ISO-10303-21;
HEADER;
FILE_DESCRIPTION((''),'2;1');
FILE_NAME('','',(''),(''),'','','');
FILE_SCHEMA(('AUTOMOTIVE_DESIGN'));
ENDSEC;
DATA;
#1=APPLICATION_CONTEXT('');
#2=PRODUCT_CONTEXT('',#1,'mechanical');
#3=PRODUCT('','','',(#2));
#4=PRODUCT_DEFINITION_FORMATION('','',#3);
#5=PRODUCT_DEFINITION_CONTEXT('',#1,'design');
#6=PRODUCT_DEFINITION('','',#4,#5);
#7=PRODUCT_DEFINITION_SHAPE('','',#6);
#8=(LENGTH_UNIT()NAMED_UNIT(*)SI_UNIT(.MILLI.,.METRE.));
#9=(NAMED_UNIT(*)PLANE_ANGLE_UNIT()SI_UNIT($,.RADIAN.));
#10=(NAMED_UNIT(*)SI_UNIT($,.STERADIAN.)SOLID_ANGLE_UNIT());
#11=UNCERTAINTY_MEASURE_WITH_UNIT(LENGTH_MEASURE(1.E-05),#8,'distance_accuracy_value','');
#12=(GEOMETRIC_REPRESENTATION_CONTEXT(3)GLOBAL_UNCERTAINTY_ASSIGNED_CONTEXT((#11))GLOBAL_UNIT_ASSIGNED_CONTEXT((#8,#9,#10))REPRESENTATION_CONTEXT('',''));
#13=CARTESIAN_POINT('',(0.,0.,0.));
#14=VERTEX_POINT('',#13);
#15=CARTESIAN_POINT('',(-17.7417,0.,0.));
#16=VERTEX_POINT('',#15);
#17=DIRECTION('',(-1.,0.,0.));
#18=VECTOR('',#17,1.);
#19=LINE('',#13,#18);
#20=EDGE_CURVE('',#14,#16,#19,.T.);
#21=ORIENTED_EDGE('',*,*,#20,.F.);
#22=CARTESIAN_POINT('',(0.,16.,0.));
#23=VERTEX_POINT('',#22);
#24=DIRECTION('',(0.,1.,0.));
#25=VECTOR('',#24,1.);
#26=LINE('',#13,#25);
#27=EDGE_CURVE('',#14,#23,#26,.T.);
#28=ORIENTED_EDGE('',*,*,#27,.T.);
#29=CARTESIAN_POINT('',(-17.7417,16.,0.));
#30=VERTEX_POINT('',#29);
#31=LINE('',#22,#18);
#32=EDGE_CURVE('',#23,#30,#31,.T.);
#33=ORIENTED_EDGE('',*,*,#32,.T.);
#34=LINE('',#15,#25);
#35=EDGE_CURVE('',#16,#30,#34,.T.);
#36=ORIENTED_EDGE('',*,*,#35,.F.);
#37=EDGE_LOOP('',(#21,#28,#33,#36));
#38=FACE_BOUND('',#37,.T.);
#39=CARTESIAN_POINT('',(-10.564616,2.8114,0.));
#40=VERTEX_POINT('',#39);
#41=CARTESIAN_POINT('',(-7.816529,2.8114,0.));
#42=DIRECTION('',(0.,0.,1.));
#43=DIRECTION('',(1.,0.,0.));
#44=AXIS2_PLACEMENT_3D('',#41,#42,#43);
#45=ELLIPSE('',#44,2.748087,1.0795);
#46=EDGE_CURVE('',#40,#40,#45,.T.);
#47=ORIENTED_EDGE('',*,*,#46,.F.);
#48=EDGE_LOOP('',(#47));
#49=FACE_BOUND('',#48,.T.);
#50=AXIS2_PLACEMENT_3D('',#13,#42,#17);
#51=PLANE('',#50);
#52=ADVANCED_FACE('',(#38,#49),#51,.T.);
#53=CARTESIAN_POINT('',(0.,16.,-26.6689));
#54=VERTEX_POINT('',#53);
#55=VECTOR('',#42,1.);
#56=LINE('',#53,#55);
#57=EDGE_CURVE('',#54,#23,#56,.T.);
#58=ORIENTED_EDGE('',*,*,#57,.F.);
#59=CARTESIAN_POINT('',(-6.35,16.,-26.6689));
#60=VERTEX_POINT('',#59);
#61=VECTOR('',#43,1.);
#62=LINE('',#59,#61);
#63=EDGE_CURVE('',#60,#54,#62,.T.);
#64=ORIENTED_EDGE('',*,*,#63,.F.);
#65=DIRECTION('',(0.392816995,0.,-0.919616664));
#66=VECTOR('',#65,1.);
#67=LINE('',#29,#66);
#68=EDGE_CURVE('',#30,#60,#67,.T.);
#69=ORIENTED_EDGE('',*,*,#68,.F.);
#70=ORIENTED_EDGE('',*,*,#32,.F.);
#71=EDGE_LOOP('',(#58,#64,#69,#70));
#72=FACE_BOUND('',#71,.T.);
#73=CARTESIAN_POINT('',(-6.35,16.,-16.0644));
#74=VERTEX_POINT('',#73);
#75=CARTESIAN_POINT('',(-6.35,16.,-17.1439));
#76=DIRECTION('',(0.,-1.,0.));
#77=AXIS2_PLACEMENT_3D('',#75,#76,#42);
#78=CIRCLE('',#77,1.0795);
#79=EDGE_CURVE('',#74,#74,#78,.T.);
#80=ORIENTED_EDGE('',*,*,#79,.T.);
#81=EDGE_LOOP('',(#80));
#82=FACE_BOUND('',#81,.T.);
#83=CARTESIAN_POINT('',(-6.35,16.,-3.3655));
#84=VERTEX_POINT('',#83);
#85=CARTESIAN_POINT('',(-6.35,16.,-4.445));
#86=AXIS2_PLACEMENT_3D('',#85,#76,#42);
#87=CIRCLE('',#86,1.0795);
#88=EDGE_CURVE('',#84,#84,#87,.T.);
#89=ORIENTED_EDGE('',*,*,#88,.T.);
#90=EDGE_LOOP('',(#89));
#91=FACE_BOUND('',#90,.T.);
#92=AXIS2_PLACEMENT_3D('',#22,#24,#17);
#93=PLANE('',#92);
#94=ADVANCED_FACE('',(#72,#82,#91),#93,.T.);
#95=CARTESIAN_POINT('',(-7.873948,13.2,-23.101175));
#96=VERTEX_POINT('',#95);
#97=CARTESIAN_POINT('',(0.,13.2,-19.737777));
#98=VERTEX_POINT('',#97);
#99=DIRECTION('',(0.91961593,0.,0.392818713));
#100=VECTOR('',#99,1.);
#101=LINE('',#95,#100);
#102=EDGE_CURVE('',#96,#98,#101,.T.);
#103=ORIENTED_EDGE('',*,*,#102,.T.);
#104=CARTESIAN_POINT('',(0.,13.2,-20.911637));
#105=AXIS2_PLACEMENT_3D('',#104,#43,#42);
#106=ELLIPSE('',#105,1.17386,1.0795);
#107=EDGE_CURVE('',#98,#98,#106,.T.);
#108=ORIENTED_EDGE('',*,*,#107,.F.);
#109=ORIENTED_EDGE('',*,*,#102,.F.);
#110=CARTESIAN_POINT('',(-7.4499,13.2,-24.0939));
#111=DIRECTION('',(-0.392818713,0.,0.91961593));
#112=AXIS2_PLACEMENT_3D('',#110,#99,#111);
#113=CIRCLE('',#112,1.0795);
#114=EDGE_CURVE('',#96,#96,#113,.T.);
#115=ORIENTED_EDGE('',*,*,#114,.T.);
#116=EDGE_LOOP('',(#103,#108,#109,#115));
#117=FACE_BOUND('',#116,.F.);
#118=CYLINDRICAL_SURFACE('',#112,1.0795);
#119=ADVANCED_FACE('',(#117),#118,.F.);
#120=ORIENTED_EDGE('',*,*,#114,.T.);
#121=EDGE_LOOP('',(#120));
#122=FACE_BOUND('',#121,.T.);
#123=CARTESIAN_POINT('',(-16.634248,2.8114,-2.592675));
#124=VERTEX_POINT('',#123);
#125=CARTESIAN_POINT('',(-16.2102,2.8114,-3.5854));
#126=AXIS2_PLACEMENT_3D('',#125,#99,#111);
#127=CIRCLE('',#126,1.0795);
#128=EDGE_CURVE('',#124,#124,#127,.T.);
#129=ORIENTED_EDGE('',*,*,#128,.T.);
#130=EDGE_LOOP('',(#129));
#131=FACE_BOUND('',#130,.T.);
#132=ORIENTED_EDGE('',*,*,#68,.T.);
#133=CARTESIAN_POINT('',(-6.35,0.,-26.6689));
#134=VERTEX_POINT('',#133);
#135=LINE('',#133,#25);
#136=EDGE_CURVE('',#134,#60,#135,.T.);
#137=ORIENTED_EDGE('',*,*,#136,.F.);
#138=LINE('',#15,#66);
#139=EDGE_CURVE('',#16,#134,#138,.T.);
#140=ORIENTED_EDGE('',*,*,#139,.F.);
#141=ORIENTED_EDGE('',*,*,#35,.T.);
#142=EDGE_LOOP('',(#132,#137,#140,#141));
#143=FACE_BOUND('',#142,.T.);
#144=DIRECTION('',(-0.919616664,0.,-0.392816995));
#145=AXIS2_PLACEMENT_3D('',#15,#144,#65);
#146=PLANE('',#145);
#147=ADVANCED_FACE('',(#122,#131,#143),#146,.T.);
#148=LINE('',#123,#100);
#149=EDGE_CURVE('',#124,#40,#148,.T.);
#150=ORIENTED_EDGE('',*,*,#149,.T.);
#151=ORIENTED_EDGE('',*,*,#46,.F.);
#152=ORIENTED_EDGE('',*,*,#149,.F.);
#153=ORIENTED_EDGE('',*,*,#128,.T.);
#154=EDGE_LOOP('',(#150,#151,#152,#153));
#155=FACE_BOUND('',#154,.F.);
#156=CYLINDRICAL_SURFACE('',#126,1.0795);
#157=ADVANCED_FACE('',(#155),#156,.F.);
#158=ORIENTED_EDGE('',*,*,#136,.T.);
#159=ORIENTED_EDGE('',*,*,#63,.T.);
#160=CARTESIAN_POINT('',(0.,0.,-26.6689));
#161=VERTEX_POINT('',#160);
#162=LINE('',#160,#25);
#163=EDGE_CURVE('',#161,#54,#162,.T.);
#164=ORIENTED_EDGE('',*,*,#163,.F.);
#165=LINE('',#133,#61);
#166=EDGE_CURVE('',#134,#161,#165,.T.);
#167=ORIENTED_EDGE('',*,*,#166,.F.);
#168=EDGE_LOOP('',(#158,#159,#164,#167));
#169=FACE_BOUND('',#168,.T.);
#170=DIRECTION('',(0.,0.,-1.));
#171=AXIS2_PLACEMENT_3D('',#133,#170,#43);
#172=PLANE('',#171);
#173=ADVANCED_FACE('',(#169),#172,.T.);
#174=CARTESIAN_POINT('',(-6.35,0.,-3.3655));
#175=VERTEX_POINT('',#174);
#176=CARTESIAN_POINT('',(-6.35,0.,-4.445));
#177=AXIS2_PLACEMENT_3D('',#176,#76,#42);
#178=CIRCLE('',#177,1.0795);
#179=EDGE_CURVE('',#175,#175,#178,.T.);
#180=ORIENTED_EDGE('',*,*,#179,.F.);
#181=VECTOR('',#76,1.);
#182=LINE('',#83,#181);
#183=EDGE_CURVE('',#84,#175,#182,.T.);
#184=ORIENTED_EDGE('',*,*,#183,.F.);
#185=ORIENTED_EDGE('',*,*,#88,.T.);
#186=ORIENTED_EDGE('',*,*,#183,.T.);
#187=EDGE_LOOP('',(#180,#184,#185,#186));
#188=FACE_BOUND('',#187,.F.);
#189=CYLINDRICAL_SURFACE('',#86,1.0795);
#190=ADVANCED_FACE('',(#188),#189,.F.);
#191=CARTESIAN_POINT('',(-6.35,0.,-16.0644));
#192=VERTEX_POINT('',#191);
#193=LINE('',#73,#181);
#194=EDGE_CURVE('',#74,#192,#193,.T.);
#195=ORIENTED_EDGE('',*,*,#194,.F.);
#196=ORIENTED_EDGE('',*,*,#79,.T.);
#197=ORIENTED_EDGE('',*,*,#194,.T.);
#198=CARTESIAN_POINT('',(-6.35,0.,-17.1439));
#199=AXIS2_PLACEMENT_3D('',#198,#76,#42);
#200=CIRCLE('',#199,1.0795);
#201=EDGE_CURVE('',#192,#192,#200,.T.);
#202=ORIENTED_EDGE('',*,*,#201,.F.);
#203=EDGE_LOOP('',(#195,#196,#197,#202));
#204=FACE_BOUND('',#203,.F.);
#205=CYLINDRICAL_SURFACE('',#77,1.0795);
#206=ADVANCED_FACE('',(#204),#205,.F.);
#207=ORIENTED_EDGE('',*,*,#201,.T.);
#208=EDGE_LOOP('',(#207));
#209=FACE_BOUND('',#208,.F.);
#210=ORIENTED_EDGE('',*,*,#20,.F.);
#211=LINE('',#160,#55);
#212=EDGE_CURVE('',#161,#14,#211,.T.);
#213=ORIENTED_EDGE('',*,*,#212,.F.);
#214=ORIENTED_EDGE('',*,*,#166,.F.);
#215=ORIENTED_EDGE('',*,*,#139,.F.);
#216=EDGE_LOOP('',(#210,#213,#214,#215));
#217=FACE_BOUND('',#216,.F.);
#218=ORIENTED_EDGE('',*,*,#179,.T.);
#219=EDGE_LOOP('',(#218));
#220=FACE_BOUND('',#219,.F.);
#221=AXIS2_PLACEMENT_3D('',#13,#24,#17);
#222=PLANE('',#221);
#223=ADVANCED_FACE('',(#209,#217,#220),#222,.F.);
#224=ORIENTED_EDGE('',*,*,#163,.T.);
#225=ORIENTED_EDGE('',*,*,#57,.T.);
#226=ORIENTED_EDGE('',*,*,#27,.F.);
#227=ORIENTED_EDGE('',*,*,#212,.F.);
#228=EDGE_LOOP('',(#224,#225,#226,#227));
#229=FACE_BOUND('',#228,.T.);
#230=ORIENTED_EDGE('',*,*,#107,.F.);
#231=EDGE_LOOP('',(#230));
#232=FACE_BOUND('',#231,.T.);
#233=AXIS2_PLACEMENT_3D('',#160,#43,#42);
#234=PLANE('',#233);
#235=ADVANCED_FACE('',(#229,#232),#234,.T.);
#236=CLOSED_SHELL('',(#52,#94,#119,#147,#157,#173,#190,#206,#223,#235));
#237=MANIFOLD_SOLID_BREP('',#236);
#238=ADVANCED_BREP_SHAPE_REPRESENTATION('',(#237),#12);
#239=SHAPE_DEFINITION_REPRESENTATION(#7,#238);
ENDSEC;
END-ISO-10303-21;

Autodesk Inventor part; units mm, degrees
ref_plane "YZ Plane" through (0, 0, 0) normal (1, 0, 0) x (0, 1, 0)
ref_plane "XZ Plane" through (0, 0, 0) normal (0, 1, 0) x (-1, 0, 0)
ref_plane "XY Plane" through (0, 0, 0) normal (0, 0, 1) x (1, 0, 0)
sketch "Sketch1" plane through (0, 0, 0) normal (0, 1, 0) x (-1, 0, 0)
  line L0 (0, 0) -> (17.7417, 0)
  line L1 (17.7417, 0) -> (6.35, -26.6689)
  line L2 (6.35, -26.6689) -> (0, -26.6689)
  line L3 (0, -26.6689) -> (0, 0)
  dimension "d0" = 23.13
  dimension "d1" = 29
  dimension "d2" = 6.35
extrude "Extrusion1" add sketch "Sketch1" along normal blind 16
sketch "Sketch2" plane through (-17.7417, 0, 0) normal (-0.9196159, 0, -0.3928187) x (-0.3928187, 0, 0.9196159)
  line L0 (-29, 16) -> (0, 16) construction
  line L1 (-29, 0) -> (-29, 16) construction
  line L2 (0, 0) -> (-29, 0) construction
  line L3 (0, 0) -> (0, 16) construction
  point P0 (-6.9693, 0)
  point P1 (-3.8988, 2.8114)
  point P2 (-26.2, 13.2)
  dimension "d5" = 2.8
  dimension "d6" = 2.8
  dimension "d26" = 22.3012
  dimension "d27" = 10.3886
hole "Hole1" at (-16.2102, 2.8114, -3.5854) at (-7.4499, 13.2, -24.0939) direction (0.9196159, 0, 0.3928187) diameter 2.159 end through all
sketch "Sketch3" plane through (0, 16, 0) normal (0, 1, 0) x (1, 0, 0)
  line L0 (-17.7417, 0) -> (0, 0) construction
  line L1 (-6.35, 0) -> (-6.35, 26.6689) construction
  line L2 (0, 26.6689) -> (-6.35, 26.6689) construction
  line L3 (0, 0) -> (0, 26.6689) construction
  point P0 (-6.35, 4.445)
  point P1 (-6.35, 17.1439)
  dimension "d16" = 6.35
  dimension "d17" = 4.445
  dimension "d18" = 9.525
  dimension "d28" = 12.6989
hole "Hole2" at (-6.35, 16, -4.445) at (-6.35, 16, -17.1439) direction (0, -1, 0) diameter 2.159 end through all
equation "\"d6\" = d5"
properties part number "Microswitch_Bracket" material "ABS Plastic"
